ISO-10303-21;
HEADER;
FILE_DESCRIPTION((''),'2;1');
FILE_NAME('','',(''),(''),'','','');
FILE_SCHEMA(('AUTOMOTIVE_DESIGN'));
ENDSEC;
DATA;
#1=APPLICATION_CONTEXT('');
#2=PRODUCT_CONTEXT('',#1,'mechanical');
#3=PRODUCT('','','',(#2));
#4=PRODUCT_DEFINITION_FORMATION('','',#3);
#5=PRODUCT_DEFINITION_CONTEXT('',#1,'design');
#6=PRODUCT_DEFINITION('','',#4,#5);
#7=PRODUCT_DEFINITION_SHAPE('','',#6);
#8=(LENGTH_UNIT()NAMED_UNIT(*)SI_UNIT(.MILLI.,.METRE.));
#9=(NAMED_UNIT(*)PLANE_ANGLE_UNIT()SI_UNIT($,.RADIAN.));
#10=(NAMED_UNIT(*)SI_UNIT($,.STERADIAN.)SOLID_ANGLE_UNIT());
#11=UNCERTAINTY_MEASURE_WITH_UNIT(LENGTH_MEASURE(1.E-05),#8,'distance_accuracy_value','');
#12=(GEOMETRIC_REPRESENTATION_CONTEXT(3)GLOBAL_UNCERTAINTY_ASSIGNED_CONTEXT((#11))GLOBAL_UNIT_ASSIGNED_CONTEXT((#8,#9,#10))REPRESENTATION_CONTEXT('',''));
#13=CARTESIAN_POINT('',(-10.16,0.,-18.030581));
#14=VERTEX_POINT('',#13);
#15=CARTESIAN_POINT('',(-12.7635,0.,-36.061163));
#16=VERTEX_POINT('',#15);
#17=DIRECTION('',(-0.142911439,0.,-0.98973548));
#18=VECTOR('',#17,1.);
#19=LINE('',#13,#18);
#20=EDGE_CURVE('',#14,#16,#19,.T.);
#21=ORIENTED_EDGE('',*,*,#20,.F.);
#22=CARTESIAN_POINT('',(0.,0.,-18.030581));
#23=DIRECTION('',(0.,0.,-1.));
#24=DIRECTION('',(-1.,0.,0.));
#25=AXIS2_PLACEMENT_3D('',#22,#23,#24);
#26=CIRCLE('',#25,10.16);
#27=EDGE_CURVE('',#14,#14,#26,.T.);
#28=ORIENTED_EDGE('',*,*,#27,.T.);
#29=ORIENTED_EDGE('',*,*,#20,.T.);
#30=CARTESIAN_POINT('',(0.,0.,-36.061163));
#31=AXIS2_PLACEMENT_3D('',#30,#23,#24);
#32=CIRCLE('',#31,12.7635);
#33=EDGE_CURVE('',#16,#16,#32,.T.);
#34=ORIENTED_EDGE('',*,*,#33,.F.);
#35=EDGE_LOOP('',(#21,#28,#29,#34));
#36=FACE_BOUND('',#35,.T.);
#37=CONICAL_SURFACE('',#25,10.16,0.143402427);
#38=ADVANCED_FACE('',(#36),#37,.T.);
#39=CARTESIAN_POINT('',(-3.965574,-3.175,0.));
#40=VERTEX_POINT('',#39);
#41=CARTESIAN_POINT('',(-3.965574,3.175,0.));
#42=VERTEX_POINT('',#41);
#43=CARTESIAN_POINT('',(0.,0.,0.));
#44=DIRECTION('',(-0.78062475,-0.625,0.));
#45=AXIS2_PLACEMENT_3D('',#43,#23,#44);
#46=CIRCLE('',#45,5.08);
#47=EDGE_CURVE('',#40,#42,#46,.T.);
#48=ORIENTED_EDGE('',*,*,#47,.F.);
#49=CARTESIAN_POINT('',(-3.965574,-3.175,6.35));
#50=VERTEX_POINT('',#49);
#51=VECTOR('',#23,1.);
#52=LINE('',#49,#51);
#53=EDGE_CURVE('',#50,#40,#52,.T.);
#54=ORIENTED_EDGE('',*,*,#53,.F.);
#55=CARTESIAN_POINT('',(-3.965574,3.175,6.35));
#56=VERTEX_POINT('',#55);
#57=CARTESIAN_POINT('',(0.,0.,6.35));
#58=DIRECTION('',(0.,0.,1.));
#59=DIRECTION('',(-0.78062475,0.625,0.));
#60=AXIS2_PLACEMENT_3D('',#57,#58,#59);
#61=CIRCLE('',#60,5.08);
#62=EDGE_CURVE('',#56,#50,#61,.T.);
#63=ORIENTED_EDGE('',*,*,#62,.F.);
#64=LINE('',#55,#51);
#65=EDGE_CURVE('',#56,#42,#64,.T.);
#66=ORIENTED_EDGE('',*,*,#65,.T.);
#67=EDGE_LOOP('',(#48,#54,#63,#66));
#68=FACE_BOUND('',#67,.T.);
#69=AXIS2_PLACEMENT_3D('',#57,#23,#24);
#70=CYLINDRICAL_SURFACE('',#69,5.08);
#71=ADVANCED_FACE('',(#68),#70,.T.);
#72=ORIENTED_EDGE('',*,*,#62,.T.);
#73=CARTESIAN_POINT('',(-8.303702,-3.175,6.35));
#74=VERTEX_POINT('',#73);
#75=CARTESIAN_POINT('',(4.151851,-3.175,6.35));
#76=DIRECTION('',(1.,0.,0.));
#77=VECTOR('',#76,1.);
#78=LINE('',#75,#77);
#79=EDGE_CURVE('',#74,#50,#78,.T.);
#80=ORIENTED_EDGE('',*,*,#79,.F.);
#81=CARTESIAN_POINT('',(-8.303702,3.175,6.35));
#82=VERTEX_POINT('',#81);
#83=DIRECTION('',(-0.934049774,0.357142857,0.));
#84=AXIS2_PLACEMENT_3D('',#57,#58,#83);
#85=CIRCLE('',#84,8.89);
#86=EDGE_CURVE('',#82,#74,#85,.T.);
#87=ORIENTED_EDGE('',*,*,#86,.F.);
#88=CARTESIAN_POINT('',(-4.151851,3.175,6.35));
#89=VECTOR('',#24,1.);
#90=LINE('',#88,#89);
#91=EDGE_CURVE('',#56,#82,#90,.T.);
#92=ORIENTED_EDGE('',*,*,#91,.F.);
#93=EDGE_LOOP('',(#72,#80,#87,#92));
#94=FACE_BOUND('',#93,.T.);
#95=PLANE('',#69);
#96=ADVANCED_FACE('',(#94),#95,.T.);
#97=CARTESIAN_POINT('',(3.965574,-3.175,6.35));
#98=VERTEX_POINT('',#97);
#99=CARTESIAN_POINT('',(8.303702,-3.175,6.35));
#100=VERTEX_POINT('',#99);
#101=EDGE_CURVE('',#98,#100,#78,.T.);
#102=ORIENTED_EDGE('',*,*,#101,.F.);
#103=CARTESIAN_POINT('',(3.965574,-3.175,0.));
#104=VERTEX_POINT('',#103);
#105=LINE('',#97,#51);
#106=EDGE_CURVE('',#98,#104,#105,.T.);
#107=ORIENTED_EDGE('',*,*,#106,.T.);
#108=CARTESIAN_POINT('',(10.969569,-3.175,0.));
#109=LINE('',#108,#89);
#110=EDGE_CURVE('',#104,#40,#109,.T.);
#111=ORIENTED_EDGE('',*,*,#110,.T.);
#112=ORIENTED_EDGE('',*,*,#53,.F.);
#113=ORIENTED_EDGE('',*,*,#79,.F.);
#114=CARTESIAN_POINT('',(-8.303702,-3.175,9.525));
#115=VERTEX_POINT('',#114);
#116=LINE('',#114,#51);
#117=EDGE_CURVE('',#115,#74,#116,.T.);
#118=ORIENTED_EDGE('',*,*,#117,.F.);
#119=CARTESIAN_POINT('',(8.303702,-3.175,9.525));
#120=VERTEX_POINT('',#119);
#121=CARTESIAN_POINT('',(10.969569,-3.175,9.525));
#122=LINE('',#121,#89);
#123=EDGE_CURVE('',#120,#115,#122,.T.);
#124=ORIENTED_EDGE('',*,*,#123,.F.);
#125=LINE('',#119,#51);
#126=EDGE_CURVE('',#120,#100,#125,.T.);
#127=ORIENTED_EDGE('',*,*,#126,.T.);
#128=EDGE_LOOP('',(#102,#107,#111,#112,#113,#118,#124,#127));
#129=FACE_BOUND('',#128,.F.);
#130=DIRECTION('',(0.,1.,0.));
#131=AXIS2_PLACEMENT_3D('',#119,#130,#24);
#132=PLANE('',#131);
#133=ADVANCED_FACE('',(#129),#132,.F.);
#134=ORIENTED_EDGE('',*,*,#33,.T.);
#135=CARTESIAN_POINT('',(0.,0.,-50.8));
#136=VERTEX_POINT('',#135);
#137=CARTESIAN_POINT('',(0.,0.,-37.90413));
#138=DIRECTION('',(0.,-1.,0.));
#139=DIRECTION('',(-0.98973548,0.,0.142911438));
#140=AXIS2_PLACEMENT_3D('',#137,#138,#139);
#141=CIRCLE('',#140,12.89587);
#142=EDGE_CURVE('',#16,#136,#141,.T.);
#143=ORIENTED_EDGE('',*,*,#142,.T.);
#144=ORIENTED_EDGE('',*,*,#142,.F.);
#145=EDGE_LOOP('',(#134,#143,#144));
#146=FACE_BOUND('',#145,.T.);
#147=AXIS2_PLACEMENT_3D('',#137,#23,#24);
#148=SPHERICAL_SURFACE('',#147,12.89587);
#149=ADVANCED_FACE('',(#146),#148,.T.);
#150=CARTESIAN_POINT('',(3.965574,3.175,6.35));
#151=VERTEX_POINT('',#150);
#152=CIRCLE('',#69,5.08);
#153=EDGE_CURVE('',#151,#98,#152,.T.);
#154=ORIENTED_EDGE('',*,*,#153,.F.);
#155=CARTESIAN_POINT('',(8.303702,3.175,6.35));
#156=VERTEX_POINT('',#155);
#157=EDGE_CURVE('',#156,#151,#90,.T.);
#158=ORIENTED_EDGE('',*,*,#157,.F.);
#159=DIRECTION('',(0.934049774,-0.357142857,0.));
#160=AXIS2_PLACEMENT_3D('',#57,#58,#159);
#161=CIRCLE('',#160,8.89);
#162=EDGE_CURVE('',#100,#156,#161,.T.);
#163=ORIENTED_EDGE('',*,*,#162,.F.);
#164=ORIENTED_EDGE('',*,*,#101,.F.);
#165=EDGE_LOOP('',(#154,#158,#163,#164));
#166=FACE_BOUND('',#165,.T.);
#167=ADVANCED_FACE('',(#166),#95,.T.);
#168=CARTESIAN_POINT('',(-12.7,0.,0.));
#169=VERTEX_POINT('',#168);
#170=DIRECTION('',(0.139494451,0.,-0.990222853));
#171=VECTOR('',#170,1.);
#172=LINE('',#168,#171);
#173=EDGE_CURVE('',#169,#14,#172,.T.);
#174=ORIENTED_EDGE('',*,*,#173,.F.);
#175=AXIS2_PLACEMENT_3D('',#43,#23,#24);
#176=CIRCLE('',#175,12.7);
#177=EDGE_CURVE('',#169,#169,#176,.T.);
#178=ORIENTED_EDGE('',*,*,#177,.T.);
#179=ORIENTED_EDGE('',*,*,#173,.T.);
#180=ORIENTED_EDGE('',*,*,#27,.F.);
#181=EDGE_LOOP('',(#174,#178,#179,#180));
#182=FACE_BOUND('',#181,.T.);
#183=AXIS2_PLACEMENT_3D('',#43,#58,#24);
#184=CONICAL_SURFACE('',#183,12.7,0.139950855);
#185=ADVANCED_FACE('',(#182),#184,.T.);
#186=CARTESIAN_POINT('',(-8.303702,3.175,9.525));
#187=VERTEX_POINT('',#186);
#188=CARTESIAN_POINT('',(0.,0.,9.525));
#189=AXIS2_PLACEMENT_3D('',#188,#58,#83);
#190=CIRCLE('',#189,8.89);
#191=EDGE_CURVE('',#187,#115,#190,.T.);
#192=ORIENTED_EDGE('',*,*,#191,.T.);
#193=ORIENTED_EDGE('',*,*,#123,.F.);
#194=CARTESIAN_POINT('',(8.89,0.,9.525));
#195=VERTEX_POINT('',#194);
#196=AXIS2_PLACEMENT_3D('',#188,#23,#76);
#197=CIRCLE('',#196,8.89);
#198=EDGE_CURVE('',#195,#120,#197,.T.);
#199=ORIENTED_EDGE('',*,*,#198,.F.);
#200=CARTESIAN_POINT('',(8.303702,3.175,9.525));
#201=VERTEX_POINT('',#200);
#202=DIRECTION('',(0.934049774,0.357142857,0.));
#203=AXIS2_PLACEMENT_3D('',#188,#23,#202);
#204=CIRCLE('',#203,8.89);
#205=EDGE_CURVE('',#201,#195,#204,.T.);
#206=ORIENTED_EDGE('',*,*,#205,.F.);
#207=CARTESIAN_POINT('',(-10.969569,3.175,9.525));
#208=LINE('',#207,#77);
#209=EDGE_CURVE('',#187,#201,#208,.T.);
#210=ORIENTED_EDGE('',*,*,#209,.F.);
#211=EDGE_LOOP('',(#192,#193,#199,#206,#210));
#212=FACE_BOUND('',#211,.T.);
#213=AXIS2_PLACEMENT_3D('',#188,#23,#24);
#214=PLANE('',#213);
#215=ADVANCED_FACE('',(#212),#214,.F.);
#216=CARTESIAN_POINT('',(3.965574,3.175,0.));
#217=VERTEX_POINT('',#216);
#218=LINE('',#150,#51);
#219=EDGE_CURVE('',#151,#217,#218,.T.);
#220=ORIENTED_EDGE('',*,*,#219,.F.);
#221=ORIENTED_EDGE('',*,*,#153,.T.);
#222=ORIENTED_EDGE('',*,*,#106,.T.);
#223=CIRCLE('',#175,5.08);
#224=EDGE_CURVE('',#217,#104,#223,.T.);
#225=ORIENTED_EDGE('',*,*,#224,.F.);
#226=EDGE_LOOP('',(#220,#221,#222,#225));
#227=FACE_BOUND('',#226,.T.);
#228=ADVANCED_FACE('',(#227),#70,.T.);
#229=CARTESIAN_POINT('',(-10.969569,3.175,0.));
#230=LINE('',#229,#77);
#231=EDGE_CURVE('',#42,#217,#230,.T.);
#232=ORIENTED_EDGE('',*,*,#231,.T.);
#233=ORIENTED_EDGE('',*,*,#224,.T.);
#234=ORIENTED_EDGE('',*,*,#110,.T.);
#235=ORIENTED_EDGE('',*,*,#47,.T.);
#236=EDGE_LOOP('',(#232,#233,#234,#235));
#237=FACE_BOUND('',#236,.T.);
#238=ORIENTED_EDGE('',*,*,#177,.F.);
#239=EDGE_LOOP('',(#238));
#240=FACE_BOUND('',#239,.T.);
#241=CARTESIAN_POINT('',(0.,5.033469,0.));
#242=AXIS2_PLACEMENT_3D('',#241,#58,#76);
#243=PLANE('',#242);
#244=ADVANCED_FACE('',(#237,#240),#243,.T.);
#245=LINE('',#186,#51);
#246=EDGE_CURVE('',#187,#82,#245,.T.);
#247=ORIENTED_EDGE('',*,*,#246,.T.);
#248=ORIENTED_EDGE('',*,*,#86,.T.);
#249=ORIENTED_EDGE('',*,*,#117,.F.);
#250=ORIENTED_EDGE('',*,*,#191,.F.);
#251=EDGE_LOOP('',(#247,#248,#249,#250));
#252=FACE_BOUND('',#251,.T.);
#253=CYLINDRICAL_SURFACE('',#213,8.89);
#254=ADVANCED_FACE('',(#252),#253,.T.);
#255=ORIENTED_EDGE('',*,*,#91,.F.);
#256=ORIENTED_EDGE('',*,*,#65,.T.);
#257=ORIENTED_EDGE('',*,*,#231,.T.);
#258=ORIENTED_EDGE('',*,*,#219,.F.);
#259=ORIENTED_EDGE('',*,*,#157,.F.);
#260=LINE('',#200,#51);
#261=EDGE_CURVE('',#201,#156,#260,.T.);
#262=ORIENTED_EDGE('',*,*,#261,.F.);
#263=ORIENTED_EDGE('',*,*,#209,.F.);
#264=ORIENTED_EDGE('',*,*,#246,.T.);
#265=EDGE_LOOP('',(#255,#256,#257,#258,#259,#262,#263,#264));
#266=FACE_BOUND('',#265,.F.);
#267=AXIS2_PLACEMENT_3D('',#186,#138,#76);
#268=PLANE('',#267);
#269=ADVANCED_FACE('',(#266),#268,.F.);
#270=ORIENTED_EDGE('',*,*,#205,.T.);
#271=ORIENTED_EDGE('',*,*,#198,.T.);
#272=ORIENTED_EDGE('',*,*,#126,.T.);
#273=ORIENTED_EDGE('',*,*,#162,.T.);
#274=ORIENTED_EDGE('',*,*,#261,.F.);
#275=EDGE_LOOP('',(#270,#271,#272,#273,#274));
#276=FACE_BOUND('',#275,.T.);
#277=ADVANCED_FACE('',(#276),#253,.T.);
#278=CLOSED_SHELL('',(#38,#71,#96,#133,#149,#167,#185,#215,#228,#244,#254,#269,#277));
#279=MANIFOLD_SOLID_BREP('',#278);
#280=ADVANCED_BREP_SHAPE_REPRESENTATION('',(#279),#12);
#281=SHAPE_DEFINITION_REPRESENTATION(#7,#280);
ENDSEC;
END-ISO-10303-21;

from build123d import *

# Parameters (mm, degrees)
F3_DEPTH = 9.525


with BuildPart() as f1:
    # F0 (on Front) → F1 (revolve)
    with BuildSketch(Plane.XZ):
        Polygon((0, -18.0305813839), (0, 0), (-5.08, 0), (-12.7, 0), (-10.16, -18.0305813839), align=None)
        Polygon((-5.08, 0), (0, 0), (0, 9.525), (-8.89, 9.525), (-8.89, 6.35), (-5.08, 6.35), align=None)
        Polygon((0, -36.0611627679), (0, -18.0305813839), (-10.16, -18.0305813839), (-12.7635, -36.0611627679), align=None)
        with BuildLine():
            Line((0, -50.8), (0, -36.0611627679))
            Line((0, -36.0611627679), (-12.7635, -36.0611627679))
            ThreePointArc((-12.7635, -36.0611627679), (-9.7485929139, -46.3461912692), (0, -50.8))
        make_face()
    revolve(axis=Axis((0, 0, -25.4), (0, 0, -1)))

    # F2 (on face) → F3 (cut, through all)
    with BuildSketch(Plane.XY.offset(9.525)):
        with BuildLine():
            ThreePointArc((8.3037024874, 3.175), (0, 8.89), (-8.3037024874, 3.175))
            Line((-8.3037024874, 3.175), (8.3037024874, 3.175))
        make_face()
        with BuildLine():
            Line((8.3037024874, -3.175), (-8.3037024874, -3.175))
            ThreePointArc((-8.3037024874, -3.175), (0, -8.89), (8.3037024874, -3.175))
        make_face()
        with BuildLine():
            ThreePointArc((10.9695693512, 3.175), (0, 11.4198107144), (-10.9695693512, 3.175))
            Line((-10.9695693512, 3.175), (-8.3037024874, 3.175))
            ThreePointArc((-8.3037024874, 3.175), (0, 8.89), (8.3037024874, 3.175))
            Line((8.3037024874, 3.175), (10.9695693512, 3.175))
        make_face()
        with BuildLine():
            Line((-8.3037024874, -3.175), (-10.9695693512, -3.175))
            ThreePointArc((-10.9695693512, -3.175), (0, -11.4198107144), (10.9695693512, -3.175))
            Line((10.9695693512, -3.175), (8.3037024874, -3.175))
            ThreePointArc((8.3037024874, -3.175), (0, -8.89), (-8.3037024874, -3.175))
        make_face()
        with BuildLine():
            Line((-8.3037024874, 3.175), (-10.9695693512, 3.175))
            ThreePointArc((-10.9695693512, 3.175), (-11.4198107144, 0), (-10.9695693512, -3.175))
            Line((-10.9695693512, -3.175), (-8.3037024874, -3.175))
            ThreePointArc((-8.3037024874, -3.175), (-8.89, 0), (-8.3037024874, 3.175))
        make_face()
        with BuildLine():
            ThreePointArc((11.4198107144, 0), (11.3066901072, 1.6033825405), (10.9695693512, 3.175))
            Line((10.9695693512, 3.175), (8.3037024874, 3.175))
            ThreePointArc((8.3037024874, 3.175), (8.7421969525, 1.6143396307), (8.89, 0))
            ThreePointArc((8.89, 0), (8.7421969525, -1.6143396307), (8.3037024874, -3.175))
            Line((8.3037024874, -3.175), (10.9695693512, -3.175))
            ThreePointArc((10.9695693512, -3.175), (11.3066901072, -1.6033825405), (11.4198107144, 0))
        make_face()
    extrude(amount=-F3_DEPTH, mode=Mode.SUBTRACT)


solid = f1.part
